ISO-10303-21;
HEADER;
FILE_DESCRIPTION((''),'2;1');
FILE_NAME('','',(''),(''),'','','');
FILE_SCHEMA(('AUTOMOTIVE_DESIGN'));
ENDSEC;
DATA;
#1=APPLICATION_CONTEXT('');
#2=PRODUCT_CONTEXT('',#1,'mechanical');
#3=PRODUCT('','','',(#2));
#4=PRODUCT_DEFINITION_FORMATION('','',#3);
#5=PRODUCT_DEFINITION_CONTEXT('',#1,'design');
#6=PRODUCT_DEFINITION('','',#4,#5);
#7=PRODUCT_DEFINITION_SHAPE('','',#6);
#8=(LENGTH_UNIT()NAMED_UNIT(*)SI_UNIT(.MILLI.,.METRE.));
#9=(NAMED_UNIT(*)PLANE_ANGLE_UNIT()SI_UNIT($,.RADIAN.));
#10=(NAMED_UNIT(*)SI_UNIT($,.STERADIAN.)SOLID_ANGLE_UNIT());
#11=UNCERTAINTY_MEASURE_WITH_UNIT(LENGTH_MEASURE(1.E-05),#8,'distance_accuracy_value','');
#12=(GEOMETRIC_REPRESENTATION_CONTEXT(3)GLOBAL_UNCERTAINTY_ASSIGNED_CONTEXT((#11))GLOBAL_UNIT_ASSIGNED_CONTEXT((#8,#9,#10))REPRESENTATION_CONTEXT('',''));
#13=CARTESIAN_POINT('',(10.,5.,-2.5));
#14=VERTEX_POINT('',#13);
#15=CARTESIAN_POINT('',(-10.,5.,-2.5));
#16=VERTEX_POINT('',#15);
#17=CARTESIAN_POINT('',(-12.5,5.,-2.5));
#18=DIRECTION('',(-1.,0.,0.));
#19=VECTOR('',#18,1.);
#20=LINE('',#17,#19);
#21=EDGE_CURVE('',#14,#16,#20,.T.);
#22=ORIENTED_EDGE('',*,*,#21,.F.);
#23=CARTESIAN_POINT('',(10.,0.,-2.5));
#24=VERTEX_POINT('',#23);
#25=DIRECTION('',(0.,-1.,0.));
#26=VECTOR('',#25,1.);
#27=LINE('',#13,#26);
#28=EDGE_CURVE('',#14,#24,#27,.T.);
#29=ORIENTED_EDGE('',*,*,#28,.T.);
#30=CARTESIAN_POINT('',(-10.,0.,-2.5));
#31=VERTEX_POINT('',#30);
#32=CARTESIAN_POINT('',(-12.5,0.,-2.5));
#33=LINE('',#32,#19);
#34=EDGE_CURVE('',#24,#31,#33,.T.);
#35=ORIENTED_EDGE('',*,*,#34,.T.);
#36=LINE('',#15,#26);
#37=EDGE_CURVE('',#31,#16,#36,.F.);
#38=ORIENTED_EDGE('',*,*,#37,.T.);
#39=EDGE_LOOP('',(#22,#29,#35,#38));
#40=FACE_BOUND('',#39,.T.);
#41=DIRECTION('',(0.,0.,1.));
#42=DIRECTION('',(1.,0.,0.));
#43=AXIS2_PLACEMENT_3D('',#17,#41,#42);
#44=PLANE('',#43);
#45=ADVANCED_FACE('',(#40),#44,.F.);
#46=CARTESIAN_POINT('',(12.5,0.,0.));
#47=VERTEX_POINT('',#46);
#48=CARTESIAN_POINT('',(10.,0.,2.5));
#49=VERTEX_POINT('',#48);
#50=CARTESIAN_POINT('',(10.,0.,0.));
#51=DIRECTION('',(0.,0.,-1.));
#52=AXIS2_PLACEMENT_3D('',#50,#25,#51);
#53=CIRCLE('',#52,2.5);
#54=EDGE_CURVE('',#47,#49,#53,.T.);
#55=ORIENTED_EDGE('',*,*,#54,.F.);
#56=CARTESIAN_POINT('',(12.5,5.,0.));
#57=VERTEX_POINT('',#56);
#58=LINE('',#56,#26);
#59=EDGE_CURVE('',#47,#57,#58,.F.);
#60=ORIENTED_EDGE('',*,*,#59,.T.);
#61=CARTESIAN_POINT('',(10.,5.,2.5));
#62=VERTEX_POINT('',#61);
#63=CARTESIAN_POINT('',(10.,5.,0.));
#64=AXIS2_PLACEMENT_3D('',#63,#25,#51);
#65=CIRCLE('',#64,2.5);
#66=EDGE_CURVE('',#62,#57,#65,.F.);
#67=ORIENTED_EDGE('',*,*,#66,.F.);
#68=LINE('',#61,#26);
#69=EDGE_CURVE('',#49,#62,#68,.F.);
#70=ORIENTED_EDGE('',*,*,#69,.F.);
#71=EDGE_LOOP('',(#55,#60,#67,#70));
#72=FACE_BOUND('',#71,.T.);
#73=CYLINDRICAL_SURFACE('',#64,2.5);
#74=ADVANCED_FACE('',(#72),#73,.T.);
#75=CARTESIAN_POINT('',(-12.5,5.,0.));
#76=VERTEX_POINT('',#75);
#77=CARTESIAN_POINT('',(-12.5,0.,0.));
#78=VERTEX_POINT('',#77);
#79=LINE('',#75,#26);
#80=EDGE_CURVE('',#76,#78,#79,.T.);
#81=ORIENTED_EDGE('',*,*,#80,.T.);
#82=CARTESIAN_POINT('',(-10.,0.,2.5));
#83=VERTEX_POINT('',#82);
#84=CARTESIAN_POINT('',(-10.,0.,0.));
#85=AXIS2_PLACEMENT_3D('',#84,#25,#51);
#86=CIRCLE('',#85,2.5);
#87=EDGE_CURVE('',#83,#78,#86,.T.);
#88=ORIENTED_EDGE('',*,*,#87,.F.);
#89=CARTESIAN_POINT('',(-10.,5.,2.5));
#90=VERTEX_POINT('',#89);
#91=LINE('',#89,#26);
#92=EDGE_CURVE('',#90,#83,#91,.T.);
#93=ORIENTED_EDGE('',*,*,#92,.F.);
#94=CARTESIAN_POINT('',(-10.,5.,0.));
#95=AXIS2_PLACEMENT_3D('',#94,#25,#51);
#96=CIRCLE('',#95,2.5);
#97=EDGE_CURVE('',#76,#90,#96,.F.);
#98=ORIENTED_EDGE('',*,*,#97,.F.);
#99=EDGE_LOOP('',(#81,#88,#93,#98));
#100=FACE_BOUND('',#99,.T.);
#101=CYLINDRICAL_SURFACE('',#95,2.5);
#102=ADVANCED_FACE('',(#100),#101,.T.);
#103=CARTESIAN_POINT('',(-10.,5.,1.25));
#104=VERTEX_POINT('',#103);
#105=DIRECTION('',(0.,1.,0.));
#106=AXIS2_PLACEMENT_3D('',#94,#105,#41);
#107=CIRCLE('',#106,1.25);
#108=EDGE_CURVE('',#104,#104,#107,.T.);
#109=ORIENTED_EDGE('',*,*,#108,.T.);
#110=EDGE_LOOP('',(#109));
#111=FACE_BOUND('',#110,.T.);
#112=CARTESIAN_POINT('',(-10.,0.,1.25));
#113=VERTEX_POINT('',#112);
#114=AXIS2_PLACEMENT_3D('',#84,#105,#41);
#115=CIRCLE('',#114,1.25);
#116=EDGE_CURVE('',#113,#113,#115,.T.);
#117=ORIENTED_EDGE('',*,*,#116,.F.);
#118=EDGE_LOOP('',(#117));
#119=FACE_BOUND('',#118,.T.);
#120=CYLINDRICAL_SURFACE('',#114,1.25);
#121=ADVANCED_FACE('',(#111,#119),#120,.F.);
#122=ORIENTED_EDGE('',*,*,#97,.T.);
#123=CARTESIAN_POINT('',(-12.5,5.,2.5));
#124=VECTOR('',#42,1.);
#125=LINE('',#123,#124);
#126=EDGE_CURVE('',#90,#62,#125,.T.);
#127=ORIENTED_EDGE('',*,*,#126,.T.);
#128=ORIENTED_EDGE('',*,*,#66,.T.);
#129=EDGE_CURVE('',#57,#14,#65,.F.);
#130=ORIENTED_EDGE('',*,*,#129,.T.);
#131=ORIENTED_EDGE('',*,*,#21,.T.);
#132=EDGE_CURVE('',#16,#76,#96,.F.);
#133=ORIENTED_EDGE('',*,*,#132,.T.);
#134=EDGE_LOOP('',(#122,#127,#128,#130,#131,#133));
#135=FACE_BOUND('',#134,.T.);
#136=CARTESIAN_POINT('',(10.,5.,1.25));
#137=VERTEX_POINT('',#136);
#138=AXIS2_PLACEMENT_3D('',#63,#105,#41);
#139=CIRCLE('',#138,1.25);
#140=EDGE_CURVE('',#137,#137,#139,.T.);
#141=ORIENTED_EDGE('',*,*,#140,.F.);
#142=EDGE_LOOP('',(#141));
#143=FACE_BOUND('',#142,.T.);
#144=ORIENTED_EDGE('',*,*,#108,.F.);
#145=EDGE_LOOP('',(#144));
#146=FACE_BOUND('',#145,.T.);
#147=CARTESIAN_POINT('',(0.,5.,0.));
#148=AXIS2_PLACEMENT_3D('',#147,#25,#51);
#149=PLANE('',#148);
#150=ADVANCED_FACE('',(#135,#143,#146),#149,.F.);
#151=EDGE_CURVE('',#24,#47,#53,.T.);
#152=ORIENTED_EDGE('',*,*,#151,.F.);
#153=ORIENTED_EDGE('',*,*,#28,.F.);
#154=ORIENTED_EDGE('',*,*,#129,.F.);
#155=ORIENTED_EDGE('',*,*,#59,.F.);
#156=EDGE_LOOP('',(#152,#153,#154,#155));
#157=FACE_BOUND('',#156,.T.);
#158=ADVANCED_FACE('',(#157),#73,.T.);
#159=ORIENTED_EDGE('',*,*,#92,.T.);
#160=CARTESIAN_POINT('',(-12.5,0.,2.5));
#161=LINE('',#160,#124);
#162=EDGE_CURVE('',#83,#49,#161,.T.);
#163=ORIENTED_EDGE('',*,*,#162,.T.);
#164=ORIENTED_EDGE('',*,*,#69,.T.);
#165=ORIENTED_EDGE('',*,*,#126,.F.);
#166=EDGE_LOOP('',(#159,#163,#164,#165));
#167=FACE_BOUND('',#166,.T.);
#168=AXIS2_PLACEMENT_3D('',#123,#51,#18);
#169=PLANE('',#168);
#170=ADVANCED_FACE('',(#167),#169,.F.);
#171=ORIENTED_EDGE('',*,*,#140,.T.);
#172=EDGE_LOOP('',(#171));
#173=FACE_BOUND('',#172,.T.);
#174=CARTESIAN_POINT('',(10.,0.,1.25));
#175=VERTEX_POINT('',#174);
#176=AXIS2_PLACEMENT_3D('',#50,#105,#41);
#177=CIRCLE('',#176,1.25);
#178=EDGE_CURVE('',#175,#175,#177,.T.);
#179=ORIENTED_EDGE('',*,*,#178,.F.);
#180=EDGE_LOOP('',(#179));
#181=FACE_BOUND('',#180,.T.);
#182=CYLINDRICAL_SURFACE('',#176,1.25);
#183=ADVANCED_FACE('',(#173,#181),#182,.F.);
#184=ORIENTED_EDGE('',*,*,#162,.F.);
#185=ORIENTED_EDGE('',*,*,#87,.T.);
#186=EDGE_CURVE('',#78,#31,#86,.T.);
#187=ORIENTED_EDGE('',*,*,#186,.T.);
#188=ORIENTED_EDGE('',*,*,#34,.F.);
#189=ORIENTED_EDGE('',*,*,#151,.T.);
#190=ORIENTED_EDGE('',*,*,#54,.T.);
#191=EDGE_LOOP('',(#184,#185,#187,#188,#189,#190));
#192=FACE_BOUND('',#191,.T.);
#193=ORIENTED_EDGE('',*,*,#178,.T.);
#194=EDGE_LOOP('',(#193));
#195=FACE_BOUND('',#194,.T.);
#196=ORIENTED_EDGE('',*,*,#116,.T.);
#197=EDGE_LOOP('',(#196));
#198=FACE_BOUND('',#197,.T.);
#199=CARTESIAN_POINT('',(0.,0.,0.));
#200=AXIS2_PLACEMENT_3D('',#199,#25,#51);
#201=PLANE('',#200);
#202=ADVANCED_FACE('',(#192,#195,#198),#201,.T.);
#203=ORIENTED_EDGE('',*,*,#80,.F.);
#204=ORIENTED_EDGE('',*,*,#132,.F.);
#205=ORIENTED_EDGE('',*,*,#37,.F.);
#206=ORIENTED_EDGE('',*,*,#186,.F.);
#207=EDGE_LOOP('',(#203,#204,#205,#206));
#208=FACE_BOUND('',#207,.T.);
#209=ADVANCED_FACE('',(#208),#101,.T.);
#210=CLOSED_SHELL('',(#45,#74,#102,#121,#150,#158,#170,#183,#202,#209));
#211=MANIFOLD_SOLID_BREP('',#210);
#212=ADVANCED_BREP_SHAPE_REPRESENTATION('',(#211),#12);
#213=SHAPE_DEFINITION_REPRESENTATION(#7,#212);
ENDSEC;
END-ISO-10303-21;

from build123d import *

# Parameters (mm, degrees)
SKETCH1_W           = 25
SKETCH1_H           = 5
BOSS_EXTRUDE1_DEPTH = 5
SKETCH2_R           = 1.25
CUT_EXTRUDE1_DEPTH  = 14.693063938
FILLET1_R           = 2.5


with BuildPart() as part:
    # Sketch1 → Boss-Extrude1 (new body)
    with BuildSketch(Plane(origin=(0, 0, 0), x_dir=(1, 0, 0), z_dir=(0, 1, 0))):
        Rectangle(SKETCH1_W, SKETCH1_H)
    extrude(amount=BOSS_EXTRUDE1_DEPTH)

    # Sketch2 → Cut-Extrude1 (cut, through all)
    with BuildSketch(Plane(origin=(0, 5, 0), x_dir=(1, 0, 0), z_dir=(0, 1, 0))):
        with Locations(Location((-10, 0, 0), (0, 0, 270))):
            Circle(SKETCH2_R)
        with Locations(Location((10, 0, 0), (0, 0, 270))):
            Circle(SKETCH2_R)
    extrude(amount=-CUT_EXTRUDE1_DEPTH, mode=Mode.SUBTRACT)

    # Fillet1
    fillet1_edges = [part.edges().sort_by_distance(p)[0] for p in [
        (12.5, 2.5, 2.5),
        (12.5, 2.5, -2.5),
        (-12.5, 2.5, 2.5),
        (-12.5, 2.5, -2.5),
    ]]
    fillet(fillet1_edges, radius=FILLET1_R - 0.0001)  # a hair under: the kernel refuses the full size


solid = part.part
